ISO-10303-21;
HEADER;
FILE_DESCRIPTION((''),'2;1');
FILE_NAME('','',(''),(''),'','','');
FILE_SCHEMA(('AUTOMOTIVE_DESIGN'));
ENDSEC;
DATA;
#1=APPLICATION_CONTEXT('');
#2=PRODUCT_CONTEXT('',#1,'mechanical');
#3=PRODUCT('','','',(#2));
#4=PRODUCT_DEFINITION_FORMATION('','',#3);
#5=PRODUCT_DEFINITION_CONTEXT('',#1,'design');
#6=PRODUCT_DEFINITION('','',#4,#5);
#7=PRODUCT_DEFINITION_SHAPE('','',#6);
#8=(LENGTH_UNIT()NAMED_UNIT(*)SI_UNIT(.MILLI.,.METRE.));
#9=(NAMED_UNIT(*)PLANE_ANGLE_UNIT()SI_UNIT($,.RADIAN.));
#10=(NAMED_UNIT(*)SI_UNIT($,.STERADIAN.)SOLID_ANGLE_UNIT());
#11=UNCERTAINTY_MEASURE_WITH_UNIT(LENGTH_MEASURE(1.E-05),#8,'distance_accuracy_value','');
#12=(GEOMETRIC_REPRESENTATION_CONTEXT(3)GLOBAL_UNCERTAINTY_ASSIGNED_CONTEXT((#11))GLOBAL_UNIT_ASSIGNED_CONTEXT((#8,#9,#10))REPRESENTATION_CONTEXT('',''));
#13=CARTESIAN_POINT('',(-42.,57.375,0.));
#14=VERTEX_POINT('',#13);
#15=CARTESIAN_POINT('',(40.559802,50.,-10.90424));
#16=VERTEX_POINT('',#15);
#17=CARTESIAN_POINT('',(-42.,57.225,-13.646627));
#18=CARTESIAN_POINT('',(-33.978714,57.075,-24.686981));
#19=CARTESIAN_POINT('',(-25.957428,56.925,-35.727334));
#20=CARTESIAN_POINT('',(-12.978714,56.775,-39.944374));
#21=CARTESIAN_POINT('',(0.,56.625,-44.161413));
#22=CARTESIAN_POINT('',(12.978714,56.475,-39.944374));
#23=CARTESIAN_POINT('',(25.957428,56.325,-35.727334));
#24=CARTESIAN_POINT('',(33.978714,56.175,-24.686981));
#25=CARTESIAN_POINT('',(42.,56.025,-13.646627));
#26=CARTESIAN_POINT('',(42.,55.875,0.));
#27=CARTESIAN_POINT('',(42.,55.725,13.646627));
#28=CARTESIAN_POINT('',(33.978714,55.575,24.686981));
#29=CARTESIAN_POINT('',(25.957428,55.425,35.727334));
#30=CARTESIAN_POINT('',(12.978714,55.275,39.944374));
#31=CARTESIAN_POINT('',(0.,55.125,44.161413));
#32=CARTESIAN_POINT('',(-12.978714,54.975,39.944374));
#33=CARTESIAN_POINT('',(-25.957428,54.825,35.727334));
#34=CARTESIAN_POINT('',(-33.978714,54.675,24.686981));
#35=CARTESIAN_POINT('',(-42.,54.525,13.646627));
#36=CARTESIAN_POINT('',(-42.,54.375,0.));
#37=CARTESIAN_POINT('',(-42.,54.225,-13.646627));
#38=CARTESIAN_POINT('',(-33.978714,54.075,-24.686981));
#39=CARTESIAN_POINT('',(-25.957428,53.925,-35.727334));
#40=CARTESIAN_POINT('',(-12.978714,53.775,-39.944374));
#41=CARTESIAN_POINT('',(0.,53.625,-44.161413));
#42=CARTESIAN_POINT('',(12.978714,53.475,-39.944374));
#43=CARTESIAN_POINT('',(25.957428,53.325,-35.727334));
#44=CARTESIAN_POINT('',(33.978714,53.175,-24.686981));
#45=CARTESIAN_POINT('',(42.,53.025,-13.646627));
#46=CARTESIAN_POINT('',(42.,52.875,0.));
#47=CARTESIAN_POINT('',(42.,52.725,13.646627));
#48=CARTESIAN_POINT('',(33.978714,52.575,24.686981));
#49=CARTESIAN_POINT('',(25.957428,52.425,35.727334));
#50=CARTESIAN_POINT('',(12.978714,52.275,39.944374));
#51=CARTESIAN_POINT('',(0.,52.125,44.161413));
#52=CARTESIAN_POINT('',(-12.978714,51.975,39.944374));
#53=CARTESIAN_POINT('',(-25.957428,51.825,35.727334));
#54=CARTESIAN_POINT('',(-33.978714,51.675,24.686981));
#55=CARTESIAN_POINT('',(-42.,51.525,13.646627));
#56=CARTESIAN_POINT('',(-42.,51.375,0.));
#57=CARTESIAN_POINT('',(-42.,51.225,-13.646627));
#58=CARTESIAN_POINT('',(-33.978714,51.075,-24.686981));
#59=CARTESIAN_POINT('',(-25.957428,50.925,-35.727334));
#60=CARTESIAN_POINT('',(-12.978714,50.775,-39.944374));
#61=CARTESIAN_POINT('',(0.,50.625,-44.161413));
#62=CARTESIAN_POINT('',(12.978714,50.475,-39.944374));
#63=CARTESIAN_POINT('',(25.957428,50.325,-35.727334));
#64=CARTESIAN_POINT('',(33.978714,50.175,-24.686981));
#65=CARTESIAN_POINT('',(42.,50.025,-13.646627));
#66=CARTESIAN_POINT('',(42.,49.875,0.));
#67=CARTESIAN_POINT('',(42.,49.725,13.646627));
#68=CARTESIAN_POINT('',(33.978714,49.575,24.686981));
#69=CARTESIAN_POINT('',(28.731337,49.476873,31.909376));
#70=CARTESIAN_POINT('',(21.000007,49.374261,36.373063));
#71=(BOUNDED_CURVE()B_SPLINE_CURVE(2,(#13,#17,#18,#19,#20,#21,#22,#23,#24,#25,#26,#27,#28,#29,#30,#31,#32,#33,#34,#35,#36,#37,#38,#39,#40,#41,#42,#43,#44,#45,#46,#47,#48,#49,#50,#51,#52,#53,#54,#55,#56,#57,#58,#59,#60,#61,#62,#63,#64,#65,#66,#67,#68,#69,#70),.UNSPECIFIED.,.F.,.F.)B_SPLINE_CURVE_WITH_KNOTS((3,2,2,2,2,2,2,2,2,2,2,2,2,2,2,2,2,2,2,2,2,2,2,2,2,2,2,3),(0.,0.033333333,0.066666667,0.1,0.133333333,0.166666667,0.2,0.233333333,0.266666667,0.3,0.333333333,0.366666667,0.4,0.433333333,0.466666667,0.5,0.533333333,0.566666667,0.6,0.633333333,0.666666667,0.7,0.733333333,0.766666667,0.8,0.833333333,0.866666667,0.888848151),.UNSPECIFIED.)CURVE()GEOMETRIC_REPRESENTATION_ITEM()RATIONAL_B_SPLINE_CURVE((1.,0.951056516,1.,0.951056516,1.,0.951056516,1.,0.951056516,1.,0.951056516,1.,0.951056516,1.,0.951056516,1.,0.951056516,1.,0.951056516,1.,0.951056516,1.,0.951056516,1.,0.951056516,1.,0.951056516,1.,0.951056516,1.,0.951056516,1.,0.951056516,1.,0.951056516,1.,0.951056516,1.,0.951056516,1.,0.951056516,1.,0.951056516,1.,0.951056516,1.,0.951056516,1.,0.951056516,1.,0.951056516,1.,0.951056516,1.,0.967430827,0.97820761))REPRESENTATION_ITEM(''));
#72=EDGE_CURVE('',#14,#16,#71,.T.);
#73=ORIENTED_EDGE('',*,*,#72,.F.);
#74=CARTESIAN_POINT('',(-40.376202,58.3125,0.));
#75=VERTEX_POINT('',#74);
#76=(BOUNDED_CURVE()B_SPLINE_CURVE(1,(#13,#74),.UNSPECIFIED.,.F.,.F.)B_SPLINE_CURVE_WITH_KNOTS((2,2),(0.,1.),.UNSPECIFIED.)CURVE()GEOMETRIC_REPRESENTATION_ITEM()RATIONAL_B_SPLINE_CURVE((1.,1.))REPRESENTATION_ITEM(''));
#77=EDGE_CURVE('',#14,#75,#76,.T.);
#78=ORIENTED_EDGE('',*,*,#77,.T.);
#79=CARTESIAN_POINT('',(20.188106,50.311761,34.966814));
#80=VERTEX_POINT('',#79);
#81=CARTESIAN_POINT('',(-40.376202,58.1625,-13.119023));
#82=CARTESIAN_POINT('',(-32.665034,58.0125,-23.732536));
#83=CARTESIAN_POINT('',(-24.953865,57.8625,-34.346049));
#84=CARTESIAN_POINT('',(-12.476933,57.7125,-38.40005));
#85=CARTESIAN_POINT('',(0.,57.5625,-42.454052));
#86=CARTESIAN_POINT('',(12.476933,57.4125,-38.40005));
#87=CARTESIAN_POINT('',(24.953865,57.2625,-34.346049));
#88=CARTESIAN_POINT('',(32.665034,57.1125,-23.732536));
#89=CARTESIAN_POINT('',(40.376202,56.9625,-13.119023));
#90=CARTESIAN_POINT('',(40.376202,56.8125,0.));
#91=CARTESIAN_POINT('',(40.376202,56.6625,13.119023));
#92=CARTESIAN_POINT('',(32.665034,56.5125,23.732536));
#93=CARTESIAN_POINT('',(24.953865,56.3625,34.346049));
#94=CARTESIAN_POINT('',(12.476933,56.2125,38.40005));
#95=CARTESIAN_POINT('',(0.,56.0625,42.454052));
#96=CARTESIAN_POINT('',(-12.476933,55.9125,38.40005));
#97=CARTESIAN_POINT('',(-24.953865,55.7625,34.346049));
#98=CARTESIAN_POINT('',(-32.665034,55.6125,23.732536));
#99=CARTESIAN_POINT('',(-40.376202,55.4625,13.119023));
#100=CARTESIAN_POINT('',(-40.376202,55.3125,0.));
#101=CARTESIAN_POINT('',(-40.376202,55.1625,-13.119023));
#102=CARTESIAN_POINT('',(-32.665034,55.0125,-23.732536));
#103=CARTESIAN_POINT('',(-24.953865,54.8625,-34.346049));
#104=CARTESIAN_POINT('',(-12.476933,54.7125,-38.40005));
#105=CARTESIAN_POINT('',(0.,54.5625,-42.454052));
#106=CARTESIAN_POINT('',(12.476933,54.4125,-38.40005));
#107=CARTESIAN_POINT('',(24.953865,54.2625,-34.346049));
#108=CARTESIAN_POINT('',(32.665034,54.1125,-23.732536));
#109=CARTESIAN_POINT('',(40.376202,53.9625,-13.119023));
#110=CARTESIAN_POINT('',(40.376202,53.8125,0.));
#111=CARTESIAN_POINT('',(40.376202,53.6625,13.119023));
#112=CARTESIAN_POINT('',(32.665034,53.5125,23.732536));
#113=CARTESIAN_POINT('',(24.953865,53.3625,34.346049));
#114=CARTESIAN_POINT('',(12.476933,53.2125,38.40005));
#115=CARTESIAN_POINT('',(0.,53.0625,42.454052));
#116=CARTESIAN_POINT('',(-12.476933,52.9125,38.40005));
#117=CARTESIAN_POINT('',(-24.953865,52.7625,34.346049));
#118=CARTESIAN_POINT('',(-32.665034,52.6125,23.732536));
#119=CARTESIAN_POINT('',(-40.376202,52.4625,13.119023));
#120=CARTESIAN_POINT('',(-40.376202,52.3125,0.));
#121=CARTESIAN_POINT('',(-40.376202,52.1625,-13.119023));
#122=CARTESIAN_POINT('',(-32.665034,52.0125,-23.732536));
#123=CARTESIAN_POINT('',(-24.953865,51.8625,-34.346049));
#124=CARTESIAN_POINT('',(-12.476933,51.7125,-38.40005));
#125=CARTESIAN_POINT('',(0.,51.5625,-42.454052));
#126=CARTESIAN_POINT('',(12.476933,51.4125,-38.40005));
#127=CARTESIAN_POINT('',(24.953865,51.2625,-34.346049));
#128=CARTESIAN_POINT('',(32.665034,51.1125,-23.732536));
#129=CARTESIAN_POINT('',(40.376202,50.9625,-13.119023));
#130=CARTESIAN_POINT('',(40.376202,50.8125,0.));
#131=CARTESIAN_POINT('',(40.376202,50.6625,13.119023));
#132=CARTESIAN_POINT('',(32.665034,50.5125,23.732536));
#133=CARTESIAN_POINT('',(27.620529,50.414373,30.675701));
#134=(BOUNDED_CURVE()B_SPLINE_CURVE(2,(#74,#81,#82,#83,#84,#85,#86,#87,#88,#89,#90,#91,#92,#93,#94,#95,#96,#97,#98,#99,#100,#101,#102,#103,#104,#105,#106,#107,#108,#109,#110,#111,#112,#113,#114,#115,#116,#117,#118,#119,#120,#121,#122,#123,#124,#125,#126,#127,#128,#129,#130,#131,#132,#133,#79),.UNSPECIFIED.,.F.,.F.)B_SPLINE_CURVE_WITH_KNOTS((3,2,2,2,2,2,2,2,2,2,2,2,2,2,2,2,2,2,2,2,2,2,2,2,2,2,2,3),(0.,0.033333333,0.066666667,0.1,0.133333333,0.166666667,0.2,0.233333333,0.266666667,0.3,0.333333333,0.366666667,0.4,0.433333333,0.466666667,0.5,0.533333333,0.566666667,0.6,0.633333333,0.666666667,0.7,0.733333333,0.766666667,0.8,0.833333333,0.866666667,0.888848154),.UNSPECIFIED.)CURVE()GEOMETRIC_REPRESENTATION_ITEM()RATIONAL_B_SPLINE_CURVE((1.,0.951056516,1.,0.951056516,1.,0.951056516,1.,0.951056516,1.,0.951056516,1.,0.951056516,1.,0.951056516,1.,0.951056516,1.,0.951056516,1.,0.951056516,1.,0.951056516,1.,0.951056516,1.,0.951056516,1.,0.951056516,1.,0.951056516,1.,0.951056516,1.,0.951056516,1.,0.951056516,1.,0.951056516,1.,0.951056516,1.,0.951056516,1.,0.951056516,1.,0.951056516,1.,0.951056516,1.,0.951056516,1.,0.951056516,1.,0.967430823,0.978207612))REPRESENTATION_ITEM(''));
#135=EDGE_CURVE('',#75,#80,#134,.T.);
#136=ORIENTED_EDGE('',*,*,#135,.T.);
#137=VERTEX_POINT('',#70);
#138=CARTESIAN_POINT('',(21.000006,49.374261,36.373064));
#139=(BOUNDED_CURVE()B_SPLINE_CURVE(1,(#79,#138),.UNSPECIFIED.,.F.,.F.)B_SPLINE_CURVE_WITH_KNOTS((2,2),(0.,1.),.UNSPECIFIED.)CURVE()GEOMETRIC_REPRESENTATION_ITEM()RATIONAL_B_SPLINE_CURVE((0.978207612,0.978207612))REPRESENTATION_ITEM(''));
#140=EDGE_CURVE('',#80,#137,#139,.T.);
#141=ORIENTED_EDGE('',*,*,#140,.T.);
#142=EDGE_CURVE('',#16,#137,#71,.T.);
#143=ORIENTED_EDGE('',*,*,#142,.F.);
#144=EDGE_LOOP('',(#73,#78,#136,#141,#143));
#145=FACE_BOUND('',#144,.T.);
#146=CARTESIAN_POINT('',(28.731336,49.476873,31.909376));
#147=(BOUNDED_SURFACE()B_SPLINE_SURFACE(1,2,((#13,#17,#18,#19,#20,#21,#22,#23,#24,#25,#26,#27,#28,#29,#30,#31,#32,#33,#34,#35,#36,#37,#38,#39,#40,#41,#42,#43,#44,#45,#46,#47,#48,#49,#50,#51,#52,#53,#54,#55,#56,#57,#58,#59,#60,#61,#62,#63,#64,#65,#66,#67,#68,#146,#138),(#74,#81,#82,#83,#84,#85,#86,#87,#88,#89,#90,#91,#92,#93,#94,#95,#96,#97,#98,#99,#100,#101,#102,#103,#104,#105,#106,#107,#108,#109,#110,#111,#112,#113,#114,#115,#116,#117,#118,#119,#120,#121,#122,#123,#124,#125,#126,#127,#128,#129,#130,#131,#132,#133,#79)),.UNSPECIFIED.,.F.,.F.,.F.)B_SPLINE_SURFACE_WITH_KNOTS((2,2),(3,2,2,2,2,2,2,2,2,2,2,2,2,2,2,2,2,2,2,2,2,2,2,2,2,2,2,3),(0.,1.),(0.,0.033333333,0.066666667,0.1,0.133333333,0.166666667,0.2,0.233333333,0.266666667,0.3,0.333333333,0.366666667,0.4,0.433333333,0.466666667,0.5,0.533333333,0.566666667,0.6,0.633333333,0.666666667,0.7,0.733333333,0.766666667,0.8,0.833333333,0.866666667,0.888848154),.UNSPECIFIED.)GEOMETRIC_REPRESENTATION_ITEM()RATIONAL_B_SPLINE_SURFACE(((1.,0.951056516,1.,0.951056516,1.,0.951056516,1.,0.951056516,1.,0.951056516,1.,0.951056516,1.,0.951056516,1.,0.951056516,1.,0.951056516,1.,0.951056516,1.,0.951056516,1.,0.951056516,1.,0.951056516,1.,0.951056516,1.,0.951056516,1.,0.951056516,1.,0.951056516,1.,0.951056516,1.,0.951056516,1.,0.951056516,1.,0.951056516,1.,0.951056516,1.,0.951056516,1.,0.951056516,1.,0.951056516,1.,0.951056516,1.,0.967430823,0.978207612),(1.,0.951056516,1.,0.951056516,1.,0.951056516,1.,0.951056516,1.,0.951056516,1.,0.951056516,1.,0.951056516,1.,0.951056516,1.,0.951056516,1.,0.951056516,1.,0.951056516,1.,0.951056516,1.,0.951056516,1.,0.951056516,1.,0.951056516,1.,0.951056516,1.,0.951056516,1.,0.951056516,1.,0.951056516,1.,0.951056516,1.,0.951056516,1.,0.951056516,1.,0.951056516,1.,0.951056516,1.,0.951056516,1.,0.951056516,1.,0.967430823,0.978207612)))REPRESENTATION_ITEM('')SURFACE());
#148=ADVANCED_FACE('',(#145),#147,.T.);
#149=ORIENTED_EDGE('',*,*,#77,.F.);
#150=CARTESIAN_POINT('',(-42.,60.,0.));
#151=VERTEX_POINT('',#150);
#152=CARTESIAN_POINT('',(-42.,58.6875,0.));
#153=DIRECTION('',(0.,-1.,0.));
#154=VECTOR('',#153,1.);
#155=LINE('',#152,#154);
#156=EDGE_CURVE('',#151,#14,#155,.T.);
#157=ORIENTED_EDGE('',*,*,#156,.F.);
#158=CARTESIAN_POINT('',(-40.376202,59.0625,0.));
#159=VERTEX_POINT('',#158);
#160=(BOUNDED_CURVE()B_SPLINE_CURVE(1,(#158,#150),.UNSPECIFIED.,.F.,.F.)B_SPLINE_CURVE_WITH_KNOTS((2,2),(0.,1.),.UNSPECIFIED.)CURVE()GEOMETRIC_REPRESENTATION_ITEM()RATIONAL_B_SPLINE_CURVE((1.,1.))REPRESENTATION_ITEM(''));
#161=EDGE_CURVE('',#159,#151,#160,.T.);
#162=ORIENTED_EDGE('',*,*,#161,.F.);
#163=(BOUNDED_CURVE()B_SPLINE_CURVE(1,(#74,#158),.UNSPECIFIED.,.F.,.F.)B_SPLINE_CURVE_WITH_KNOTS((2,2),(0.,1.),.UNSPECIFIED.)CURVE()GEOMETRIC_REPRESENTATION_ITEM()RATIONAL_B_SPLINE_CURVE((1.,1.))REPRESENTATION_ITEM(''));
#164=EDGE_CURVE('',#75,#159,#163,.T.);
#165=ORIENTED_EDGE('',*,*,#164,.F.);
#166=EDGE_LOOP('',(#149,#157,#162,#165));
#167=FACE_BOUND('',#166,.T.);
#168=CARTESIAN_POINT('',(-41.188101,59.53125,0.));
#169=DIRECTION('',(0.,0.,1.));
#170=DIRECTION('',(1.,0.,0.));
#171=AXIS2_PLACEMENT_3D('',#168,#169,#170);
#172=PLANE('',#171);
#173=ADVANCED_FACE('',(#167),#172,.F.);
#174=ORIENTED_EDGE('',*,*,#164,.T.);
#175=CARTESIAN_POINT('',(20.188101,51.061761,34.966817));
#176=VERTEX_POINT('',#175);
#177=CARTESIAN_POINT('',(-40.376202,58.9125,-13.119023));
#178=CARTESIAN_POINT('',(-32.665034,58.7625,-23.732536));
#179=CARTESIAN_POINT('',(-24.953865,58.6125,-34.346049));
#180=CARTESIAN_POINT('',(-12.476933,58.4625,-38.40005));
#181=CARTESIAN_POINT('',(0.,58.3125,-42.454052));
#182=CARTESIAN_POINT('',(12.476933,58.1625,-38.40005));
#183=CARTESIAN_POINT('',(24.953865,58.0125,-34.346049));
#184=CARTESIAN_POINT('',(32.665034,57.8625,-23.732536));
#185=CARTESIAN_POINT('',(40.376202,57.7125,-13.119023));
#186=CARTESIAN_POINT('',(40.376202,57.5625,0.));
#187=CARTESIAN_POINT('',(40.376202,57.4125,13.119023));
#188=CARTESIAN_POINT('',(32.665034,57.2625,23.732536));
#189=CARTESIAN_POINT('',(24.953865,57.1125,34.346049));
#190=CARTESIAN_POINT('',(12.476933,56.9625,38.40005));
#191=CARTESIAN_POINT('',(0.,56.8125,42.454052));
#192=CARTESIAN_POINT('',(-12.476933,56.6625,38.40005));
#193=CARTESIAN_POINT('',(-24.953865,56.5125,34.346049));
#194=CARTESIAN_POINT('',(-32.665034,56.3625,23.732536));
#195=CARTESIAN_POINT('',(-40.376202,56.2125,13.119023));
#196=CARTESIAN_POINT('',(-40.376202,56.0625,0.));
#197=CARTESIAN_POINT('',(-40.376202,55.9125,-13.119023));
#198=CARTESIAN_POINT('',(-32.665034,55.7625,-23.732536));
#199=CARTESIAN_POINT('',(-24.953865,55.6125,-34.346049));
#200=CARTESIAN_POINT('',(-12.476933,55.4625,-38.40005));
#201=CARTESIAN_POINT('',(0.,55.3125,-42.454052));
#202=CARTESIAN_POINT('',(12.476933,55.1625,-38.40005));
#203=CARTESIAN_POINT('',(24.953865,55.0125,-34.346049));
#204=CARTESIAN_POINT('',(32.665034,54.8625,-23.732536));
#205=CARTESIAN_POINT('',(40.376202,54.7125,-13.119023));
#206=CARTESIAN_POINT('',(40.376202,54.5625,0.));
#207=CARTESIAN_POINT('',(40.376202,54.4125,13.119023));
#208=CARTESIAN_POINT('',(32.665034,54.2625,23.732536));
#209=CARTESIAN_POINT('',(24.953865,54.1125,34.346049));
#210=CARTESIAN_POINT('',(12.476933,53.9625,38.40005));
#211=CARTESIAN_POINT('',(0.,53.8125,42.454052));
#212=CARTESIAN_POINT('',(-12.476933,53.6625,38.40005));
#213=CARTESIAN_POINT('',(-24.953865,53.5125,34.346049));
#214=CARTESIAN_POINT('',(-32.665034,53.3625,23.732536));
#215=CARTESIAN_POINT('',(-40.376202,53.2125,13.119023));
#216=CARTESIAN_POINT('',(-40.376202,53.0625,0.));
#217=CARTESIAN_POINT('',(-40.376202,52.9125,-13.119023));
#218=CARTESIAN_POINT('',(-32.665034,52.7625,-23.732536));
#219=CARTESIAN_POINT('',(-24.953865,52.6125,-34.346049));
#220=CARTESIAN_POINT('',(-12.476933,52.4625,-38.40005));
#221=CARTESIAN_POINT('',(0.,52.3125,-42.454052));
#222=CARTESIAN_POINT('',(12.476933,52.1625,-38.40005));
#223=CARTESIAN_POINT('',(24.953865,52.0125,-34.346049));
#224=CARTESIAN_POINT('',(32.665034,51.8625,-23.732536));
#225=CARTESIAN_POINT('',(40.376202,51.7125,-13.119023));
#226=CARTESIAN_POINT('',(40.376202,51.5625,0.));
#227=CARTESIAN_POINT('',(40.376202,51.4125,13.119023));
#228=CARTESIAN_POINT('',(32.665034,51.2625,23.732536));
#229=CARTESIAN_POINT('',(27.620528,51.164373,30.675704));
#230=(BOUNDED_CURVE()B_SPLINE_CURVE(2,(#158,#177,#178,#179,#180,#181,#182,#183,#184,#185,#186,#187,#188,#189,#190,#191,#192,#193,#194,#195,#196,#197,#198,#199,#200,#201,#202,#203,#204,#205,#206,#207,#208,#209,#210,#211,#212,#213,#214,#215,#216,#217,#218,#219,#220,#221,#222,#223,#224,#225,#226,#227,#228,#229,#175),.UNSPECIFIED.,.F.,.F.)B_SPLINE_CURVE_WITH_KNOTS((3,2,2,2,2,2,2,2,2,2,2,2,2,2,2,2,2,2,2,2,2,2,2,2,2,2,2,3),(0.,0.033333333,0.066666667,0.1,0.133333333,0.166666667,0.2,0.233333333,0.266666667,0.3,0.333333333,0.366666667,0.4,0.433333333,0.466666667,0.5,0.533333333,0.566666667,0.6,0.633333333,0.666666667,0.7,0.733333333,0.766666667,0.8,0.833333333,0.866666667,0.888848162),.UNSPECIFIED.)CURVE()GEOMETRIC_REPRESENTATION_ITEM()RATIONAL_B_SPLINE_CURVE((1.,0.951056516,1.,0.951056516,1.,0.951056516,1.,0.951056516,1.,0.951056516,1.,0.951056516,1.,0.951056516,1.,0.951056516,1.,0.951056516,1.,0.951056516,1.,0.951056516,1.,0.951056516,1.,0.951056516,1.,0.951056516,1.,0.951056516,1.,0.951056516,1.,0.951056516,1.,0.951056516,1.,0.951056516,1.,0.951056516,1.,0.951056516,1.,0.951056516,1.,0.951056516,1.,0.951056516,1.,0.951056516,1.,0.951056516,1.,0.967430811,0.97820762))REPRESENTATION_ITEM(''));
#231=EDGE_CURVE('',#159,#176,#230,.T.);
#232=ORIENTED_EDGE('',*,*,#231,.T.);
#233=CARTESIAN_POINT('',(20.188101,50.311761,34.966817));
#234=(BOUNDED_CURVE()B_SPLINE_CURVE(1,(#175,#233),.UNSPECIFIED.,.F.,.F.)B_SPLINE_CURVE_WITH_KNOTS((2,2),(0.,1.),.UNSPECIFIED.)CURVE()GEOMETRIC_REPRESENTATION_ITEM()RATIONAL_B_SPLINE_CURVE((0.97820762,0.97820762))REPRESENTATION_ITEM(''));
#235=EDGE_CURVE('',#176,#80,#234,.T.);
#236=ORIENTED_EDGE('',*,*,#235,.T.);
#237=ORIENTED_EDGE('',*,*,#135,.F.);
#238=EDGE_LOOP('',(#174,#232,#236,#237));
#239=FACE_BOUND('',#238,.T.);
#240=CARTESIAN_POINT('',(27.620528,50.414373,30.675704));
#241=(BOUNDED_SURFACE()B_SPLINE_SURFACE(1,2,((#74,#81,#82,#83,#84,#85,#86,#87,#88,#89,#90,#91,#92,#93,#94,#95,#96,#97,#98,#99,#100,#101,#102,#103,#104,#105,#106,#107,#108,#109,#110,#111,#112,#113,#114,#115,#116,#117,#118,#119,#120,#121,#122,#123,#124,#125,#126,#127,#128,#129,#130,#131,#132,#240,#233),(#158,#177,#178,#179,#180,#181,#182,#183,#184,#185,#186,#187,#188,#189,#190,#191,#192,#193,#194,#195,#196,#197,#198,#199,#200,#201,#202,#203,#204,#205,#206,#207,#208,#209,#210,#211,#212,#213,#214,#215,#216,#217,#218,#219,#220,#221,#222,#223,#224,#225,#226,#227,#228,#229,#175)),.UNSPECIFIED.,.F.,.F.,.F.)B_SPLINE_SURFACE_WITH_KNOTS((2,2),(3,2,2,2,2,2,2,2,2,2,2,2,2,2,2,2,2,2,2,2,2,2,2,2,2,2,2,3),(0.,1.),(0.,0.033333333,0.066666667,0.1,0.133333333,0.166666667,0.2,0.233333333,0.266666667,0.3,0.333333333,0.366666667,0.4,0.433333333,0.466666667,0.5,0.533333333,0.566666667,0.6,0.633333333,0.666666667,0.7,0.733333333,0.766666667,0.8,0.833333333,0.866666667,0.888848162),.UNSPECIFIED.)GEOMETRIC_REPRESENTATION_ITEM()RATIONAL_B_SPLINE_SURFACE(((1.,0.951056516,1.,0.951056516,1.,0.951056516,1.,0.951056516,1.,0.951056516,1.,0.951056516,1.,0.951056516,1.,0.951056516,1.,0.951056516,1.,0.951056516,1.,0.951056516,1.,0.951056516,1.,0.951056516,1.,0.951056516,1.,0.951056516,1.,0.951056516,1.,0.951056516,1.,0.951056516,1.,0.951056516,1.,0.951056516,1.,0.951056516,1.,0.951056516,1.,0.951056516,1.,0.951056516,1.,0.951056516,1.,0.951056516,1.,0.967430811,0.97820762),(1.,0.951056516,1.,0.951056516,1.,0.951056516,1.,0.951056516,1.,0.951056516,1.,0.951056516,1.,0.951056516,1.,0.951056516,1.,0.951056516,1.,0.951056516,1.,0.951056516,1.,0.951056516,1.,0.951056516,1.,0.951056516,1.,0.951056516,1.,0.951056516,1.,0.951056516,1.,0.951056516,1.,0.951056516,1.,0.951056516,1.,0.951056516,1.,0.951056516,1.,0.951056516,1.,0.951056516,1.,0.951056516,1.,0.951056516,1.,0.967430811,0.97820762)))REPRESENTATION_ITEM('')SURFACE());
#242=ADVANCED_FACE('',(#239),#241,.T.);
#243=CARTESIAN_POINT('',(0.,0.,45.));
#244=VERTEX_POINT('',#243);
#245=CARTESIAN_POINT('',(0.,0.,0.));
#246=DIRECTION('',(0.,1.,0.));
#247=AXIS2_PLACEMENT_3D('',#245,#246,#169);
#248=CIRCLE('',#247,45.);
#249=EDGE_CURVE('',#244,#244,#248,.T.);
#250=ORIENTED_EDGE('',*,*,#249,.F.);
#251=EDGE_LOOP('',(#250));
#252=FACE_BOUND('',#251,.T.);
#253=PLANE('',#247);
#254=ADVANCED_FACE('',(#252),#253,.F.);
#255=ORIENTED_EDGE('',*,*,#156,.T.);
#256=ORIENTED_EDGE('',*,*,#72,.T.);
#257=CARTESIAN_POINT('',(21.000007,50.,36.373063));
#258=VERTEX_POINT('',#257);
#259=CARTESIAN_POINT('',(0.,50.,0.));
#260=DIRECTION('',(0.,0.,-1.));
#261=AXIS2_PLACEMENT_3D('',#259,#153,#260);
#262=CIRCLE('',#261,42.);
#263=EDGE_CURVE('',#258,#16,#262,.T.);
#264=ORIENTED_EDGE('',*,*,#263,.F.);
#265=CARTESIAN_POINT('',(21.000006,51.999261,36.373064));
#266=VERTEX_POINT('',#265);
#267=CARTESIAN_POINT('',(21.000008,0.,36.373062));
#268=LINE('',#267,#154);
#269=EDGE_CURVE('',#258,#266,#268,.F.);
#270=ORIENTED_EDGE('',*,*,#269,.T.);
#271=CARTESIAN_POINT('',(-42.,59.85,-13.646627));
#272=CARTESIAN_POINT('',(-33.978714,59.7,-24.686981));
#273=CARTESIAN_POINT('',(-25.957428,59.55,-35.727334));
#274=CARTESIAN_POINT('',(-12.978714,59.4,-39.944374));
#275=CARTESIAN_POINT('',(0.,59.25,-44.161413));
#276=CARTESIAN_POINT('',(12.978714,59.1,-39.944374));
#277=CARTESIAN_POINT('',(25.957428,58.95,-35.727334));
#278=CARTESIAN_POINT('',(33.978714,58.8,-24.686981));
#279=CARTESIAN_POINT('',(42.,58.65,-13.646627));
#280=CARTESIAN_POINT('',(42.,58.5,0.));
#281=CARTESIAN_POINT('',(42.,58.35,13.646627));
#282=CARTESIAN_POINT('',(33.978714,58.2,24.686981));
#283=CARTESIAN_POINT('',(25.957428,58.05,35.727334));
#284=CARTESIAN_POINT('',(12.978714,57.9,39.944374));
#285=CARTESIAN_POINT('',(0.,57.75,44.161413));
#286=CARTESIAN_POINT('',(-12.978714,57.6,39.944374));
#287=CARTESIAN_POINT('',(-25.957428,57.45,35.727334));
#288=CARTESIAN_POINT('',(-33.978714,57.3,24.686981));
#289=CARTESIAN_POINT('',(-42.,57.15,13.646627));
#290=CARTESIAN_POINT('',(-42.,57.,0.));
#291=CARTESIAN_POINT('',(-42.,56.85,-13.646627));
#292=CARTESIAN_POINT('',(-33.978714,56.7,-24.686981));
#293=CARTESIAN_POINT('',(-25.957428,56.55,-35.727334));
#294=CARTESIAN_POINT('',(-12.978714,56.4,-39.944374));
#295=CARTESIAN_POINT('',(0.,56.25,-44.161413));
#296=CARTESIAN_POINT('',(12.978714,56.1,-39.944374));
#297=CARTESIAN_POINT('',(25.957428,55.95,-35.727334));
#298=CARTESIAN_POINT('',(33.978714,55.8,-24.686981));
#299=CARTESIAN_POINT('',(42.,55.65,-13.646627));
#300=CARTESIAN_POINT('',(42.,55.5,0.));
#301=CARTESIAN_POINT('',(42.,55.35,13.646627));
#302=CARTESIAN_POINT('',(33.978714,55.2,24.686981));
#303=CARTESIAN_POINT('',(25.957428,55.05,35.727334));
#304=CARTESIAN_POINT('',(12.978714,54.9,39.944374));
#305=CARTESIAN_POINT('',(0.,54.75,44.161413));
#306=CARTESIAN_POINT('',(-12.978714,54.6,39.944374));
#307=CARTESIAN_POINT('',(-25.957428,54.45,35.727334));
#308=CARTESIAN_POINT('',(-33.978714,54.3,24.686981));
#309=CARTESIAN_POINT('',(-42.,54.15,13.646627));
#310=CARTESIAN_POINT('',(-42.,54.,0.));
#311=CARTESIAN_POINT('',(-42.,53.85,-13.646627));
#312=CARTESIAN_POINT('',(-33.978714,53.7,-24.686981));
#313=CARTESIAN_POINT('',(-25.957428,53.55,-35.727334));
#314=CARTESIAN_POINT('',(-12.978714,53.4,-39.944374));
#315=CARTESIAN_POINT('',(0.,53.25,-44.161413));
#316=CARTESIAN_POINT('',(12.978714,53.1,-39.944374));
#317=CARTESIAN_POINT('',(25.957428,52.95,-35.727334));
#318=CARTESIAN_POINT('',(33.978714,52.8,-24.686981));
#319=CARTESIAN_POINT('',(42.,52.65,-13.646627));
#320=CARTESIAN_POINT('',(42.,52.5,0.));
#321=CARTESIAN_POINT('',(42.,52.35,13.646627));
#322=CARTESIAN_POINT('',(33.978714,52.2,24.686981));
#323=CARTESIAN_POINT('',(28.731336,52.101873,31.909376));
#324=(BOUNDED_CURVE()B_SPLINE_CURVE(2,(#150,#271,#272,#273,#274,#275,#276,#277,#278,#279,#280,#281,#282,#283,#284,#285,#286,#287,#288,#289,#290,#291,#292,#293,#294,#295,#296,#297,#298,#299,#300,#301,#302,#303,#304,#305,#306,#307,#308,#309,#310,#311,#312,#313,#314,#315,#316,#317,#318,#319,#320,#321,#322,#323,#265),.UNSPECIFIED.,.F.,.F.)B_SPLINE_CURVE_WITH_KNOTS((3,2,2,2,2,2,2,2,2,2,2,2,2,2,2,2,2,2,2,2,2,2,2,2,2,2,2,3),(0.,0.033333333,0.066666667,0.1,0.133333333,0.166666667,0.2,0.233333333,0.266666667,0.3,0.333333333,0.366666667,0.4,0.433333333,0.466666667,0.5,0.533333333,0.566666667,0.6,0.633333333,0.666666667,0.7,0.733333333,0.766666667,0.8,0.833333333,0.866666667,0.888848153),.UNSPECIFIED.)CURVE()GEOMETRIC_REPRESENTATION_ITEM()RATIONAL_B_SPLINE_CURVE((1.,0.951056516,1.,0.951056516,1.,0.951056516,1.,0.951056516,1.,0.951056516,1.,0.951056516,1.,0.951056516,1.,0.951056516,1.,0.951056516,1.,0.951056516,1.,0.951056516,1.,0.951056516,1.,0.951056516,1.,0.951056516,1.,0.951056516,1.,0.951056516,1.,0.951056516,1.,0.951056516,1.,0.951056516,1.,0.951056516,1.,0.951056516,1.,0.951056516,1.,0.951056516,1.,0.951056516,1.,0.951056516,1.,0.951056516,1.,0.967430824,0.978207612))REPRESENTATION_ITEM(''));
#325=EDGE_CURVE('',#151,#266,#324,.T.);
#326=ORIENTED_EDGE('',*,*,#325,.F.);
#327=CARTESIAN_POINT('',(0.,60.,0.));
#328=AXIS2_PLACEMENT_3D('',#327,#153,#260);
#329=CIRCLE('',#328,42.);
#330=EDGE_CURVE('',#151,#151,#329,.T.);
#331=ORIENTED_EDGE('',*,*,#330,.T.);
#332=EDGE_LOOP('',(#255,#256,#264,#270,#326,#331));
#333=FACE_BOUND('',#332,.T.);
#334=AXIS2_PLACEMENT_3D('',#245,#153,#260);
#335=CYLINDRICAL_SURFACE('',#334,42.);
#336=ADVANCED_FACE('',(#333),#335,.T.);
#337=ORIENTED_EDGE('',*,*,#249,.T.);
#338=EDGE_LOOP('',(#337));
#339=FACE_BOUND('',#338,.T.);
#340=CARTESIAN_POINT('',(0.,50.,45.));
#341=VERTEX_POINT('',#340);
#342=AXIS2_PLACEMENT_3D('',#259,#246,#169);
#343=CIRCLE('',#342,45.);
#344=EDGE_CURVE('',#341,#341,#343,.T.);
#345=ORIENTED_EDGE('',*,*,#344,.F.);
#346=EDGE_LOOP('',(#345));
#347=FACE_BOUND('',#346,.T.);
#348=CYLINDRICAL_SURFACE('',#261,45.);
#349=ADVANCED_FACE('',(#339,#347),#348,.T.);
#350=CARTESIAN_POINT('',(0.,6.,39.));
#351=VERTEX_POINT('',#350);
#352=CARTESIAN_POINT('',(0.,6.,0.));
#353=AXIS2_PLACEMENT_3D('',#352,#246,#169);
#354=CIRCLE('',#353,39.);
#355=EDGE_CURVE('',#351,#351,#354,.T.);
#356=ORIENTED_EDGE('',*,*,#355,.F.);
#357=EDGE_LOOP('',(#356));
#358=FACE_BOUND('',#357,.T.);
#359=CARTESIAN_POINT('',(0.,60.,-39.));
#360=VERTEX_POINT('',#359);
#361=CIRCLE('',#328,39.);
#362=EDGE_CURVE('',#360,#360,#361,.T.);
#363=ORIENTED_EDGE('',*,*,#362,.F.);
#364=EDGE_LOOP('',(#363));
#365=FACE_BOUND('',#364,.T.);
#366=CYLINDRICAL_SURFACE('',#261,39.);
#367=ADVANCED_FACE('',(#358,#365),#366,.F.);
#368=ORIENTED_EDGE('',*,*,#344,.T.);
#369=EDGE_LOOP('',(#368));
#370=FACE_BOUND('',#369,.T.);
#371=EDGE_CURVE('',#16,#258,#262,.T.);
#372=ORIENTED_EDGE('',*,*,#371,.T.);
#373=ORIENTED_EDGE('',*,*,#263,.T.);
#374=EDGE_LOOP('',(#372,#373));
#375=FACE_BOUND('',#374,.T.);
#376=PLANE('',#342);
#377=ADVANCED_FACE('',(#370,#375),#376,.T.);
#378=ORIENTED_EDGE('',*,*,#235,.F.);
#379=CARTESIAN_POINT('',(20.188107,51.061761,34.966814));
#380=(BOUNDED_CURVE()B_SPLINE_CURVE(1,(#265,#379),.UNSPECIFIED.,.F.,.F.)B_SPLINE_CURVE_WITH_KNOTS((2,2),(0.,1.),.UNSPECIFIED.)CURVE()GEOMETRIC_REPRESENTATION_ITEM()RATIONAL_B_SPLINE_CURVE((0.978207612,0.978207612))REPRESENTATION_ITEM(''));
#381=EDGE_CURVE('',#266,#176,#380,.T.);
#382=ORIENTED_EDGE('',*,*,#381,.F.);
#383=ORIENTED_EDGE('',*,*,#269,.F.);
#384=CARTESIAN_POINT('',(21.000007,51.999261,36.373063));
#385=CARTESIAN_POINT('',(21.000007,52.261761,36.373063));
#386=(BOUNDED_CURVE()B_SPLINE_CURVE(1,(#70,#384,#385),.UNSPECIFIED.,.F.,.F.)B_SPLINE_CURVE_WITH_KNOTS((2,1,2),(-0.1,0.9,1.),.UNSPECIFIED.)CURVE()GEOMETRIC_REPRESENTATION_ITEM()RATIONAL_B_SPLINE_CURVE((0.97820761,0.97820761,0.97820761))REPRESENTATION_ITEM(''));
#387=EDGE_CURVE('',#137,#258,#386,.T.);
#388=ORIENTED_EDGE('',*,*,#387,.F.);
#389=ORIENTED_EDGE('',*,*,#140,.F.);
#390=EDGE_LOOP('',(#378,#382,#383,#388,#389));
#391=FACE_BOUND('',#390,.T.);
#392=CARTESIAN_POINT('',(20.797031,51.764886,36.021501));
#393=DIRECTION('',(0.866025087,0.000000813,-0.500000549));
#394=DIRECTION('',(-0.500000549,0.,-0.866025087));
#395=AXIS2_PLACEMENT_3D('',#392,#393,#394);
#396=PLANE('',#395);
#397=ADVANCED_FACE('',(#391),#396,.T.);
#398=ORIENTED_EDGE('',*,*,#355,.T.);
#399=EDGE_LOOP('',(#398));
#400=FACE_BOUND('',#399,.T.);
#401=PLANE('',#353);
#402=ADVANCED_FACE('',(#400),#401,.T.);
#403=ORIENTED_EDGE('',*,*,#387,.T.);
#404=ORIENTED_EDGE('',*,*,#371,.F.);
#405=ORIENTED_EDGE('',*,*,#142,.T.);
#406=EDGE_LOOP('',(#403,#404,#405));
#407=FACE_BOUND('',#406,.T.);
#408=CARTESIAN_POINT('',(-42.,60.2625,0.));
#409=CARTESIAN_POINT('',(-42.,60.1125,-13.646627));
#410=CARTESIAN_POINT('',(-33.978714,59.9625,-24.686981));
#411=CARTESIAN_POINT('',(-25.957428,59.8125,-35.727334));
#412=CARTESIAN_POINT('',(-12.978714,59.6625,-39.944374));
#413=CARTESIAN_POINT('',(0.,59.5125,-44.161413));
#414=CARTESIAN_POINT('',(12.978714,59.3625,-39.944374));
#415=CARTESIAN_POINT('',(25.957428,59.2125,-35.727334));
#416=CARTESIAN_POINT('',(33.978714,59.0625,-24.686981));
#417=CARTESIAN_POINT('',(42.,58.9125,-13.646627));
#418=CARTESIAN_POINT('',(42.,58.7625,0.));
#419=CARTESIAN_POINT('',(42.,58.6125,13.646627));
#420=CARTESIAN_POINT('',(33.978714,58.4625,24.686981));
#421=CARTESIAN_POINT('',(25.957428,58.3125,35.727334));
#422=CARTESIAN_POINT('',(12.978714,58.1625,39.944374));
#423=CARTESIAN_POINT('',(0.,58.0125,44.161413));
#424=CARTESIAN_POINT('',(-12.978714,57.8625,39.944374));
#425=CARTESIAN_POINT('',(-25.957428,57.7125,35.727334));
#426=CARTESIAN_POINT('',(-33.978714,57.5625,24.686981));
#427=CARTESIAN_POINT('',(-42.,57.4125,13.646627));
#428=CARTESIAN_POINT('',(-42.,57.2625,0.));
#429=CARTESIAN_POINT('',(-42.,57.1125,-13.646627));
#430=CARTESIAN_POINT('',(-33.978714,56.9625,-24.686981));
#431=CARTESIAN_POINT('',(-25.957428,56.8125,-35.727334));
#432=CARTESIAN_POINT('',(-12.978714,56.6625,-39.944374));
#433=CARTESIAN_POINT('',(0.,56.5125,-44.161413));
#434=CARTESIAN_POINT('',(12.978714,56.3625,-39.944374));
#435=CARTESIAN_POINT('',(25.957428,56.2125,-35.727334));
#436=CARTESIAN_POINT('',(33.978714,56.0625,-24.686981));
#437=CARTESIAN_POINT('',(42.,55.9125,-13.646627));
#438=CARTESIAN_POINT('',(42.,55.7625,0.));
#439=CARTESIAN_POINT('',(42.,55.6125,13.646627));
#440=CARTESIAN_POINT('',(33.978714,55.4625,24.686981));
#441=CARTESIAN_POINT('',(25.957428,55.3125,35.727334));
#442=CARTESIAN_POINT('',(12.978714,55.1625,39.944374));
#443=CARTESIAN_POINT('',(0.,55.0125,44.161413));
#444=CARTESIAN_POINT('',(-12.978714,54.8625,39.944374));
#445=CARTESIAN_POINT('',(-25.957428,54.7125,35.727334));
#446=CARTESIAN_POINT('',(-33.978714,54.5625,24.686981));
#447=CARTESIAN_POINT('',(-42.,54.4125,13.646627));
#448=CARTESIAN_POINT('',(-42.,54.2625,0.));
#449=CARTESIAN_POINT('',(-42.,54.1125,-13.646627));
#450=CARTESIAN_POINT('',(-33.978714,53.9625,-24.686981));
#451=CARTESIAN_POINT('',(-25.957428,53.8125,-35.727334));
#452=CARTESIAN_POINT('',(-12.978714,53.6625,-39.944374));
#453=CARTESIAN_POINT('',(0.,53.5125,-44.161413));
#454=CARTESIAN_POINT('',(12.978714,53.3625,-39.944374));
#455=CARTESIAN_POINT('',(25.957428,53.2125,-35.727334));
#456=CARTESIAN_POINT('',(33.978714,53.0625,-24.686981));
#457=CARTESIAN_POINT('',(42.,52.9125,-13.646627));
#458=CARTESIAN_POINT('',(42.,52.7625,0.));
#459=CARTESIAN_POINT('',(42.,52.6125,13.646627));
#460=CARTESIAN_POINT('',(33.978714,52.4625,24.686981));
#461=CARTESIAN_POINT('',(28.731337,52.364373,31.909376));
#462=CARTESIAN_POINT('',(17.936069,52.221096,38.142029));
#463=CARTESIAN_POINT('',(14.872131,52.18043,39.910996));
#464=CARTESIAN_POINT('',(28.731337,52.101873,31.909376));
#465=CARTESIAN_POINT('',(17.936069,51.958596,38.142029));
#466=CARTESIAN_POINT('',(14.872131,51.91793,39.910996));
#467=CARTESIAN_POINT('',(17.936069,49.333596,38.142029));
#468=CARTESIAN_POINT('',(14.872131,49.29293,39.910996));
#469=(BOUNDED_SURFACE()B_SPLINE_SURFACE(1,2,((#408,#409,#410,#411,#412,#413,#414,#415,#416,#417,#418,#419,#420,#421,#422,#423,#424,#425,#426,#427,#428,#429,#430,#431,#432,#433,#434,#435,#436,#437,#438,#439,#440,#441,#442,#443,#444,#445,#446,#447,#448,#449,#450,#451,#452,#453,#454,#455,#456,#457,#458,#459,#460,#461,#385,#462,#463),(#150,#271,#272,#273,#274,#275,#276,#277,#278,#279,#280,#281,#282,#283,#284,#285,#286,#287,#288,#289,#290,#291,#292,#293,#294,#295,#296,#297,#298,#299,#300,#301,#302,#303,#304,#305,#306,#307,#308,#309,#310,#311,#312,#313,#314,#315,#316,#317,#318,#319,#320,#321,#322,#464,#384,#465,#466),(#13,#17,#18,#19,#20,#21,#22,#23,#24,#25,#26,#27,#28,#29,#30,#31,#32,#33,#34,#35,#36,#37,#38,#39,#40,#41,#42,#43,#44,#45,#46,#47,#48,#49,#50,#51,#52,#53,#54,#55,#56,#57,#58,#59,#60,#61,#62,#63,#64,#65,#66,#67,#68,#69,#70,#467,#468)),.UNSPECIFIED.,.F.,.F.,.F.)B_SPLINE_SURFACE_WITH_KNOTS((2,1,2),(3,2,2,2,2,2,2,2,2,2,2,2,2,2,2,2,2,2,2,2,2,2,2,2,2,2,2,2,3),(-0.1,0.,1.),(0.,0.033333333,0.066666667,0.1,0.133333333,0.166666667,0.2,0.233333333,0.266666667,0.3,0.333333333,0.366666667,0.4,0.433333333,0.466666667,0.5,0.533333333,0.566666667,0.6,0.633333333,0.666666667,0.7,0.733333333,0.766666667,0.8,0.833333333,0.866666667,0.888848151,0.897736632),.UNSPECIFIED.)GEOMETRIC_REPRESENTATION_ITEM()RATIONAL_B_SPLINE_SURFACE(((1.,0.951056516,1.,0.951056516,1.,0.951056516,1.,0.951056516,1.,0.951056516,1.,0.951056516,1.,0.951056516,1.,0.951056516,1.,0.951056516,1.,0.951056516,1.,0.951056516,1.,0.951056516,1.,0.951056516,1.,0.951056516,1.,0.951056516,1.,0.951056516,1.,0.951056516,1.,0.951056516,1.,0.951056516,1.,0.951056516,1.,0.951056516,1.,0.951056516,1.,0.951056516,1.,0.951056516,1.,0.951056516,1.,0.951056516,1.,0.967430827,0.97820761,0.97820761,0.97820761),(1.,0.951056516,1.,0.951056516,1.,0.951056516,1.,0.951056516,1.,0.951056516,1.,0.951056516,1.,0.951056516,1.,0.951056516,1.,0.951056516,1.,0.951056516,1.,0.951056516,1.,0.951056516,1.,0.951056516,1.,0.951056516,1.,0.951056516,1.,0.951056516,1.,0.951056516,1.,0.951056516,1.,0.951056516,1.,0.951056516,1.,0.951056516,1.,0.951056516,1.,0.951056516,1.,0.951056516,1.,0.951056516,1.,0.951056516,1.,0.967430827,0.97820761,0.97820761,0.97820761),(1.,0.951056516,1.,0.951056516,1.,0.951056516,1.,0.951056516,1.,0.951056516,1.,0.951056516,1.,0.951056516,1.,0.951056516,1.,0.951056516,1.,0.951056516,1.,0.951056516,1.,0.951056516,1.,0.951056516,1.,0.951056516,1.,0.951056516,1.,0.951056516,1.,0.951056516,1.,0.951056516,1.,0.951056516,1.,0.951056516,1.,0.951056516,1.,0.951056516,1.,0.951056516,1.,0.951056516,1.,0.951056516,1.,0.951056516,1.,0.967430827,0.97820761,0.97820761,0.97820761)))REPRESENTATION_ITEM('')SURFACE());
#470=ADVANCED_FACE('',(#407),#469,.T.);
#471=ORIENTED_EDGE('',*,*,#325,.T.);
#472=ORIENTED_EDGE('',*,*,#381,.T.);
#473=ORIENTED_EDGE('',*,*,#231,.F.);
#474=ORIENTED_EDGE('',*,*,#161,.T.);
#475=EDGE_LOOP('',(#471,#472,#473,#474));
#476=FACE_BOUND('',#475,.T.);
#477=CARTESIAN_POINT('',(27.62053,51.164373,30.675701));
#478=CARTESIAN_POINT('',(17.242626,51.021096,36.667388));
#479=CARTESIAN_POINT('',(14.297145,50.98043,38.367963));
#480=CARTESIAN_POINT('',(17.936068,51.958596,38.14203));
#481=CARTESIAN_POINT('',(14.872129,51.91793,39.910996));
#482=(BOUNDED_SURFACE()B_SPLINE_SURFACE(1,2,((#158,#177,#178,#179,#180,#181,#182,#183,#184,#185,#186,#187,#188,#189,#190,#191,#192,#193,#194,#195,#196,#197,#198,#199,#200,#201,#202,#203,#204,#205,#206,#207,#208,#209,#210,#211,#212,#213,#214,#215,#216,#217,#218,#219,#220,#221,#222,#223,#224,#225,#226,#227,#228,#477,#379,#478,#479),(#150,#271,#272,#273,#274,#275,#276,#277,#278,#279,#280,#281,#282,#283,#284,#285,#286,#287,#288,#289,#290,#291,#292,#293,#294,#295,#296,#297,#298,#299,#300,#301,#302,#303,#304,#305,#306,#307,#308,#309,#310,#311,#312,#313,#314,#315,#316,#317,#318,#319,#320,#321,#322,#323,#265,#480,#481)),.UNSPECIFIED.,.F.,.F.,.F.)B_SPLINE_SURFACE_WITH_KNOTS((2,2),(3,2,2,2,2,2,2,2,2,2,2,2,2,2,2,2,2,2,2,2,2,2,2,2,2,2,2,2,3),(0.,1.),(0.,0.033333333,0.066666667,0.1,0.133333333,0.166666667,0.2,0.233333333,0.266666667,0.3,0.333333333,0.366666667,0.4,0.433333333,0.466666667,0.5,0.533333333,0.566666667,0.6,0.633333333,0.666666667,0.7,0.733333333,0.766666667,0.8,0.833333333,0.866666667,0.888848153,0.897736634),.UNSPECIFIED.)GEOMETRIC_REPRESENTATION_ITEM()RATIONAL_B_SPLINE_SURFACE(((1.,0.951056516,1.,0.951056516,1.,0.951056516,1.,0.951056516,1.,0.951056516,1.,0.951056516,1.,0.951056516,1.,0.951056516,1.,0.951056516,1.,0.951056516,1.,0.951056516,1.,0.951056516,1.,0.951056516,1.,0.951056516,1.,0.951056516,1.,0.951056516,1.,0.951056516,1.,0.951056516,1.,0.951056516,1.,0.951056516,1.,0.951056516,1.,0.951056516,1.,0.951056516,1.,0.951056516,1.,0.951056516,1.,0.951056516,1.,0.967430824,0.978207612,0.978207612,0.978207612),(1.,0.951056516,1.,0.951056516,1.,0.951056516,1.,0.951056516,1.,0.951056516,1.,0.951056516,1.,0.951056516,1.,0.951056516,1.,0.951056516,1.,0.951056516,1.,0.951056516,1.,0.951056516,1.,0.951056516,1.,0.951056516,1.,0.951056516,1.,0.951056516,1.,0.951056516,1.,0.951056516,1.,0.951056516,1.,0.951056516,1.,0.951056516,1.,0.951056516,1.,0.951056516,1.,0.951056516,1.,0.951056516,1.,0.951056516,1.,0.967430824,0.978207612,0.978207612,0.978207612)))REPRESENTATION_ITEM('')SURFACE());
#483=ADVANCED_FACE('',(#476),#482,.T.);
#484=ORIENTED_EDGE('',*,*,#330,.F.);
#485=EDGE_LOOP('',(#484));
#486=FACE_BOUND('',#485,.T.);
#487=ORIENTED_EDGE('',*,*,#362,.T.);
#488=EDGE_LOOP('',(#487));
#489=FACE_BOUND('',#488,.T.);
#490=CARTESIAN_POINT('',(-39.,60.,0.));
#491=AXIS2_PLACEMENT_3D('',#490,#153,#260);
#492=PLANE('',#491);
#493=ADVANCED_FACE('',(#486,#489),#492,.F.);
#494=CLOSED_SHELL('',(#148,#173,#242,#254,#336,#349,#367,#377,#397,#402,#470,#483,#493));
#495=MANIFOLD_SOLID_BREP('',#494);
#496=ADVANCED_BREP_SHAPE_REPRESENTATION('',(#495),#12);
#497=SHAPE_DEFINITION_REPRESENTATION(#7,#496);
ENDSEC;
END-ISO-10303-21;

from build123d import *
from build123d.topology import SkipClean

# Parameters (mm, degrees)
SKETCH1_R           = 45
BOSS_EXTRUDE1_DEPTH = 50
SHELL1_T            = -6
SKETCH3_W           = 3
SKETCH3_H           = 10
THREAD1_PITCH       = 3


with BuildPart() as part:
    # Sketch1 → Boss-Extrude1 (new body)
    with BuildSketch(Plane(origin=(0, 0, 0), x_dir=(1, 0, 0), z_dir=(0, 1, 0))):
        with Locations(Location((0, 0, 0), (0, 0, 270))):
            Circle(SKETCH1_R)
    extrude(amount=BOSS_EXTRUDE1_DEPTH)

    # Shell1
    shell1_openings = [part.faces().sort_by_distance(p)[0] for p in [
        (0, 50, 0),
    ]]
    offset(amount=SHELL1_T, openings=shell1_openings, kind=Kind.INTERSECTION)

    # Sketch3 → Revolve1 (revolve)
    with SkipClean():  # the faces are left unmerged after this step: merging them gives an invalid solid
        with BuildSketch(Plane.XY, mode=Mode.PRIVATE) as revolve1_sk:
            with Locations((-40.5, 55)):
                Rectangle(SKETCH3_W, SKETCH3_H)
        revolve(revolve1_sk.sketch.rotate(Axis((0, 0, 0), (0, 1, 0)), 270), axis=Axis((0, 0, 0), (0, 1, 0)))
    add(part.part.scale(1), mode=Mode.REPLACE)  # the faces are merged on a copy

    # Thread1: the profile of Thread Profile1 profile screwed along a right-hand helix of 2.666667 turns, 10 arcs to a turn; built about Z, then put on its axis
    thread1_z = Axis((0, 0, 0), (0, 0, 1))
    thread1_corners = [(42.0003, 0, -0.000173205), (42.0003, 0, 2.625173197), (40.376202375, 0, 1.687499996), (40.376202375, 0, 0.937499996)]
    with BuildLine(mode=Mode.PRIVATE) as thread1_profile:
        Line(thread1_corners[0], thread1_corners[1])
        Line(thread1_corners[1], thread1_corners[2])
        Line(thread1_corners[2], thread1_corners[3])
        Line(thread1_corners[3], thread1_corners[0])
    thread1_cap = Face(thread1_profile.wire())
    thread1_turn_angles = [0, 18, 36, 54, 72, 90, 108, 126, 144, 162, 180, 198, 216, 234, 252, 270, 288, 306, 324, 342, 360]
    thread1_turn_weights = [1, 0.9510565162951535, 1, 0.9510565162951535, 1, 0.9510565162951535, 1, 0.9510565162951535, 1, 0.9510565162951535, 1, 0.9510565162951535, 1, 0.9510565162951535, 1, 0.9510565162951535, 1, 0.9510565162951535, 1, 0.9510565162951535, 1]
    thread1_turn_rails = [Edge.make_bspline([Vector(p[0], p[1], 0).rotate(thread1_z, thread1_turn_angles[k]) / thread1_turn_weights[k] + Vector(0, 0, p[2] + THREAD1_PITCH * thread1_turn_angles[k] / 360) for k in range(21)], [0, 0, 0, 1, 1, 2, 2, 3, 3, 4, 4, 5, 5, 6, 6, 7, 7, 8, 8, 9, 9, 10, 10, 10], 2, thread1_turn_weights) for p in thread1_corners]
    thread1_turn_sides = [Face.make_surface_from_curves(thread1_turn_rails[p[0]], thread1_turn_rails[p[1]]) for p in [(0, 1), (1, 2), (2, 3), (3, 0)]]
    thread1_last_angles = [720, 738, 756, 774, 792, 810, 828, 846, 864, 882, 900, 918, 936, 948, 960]
    thread1_last_weights = [1, 0.9510565162951535, 1, 0.9510565162951535, 1, 0.9510565162951535, 1, 0.9510565162951535, 1, 0.9510565162951535, 1, 0.9510565162951535, 1, 0.978147600733806, 1]
    thread1_last_rails = [Edge.make_bspline([Vector(p[0], p[1], 0).rotate(thread1_z, thread1_last_angles[k]) / thread1_last_weights[k] + Vector(0, 0, p[2] + THREAD1_PITCH * thread1_last_angles[k] / 360) for k in range(15)], [0, 0, 0, 1, 1, 2, 2, 3, 3, 4, 4, 5, 5, 6, 6, 7, 7, 7], 2, thread1_last_weights) for p in thread1_corners]
    thread1_last_sides = [Face.make_surface_from_curves(thread1_last_rails[p[0]], thread1_last_rails[p[1]]) for p in [(0, 1), (1, 2), (2, 3), (3, 0)]]
    thread1 = Plane(origin=(0, 60, 0), x_dir=(-1, 0, 0), z_dir=(0, -1, 0)) * Solid(Shell([*[p.moved(Location((0, 0, THREAD1_PITCH * i))) for i in range(2) for p in thread1_turn_sides], *thread1_last_sides, thread1_cap, thread1_cap.rotate(thread1_z, 960).moved(Location((0, 0, THREAD1_PITCH * 960 / 360)))]))
    add(thread1, mode=Mode.SUBTRACT)


solid = part.part
